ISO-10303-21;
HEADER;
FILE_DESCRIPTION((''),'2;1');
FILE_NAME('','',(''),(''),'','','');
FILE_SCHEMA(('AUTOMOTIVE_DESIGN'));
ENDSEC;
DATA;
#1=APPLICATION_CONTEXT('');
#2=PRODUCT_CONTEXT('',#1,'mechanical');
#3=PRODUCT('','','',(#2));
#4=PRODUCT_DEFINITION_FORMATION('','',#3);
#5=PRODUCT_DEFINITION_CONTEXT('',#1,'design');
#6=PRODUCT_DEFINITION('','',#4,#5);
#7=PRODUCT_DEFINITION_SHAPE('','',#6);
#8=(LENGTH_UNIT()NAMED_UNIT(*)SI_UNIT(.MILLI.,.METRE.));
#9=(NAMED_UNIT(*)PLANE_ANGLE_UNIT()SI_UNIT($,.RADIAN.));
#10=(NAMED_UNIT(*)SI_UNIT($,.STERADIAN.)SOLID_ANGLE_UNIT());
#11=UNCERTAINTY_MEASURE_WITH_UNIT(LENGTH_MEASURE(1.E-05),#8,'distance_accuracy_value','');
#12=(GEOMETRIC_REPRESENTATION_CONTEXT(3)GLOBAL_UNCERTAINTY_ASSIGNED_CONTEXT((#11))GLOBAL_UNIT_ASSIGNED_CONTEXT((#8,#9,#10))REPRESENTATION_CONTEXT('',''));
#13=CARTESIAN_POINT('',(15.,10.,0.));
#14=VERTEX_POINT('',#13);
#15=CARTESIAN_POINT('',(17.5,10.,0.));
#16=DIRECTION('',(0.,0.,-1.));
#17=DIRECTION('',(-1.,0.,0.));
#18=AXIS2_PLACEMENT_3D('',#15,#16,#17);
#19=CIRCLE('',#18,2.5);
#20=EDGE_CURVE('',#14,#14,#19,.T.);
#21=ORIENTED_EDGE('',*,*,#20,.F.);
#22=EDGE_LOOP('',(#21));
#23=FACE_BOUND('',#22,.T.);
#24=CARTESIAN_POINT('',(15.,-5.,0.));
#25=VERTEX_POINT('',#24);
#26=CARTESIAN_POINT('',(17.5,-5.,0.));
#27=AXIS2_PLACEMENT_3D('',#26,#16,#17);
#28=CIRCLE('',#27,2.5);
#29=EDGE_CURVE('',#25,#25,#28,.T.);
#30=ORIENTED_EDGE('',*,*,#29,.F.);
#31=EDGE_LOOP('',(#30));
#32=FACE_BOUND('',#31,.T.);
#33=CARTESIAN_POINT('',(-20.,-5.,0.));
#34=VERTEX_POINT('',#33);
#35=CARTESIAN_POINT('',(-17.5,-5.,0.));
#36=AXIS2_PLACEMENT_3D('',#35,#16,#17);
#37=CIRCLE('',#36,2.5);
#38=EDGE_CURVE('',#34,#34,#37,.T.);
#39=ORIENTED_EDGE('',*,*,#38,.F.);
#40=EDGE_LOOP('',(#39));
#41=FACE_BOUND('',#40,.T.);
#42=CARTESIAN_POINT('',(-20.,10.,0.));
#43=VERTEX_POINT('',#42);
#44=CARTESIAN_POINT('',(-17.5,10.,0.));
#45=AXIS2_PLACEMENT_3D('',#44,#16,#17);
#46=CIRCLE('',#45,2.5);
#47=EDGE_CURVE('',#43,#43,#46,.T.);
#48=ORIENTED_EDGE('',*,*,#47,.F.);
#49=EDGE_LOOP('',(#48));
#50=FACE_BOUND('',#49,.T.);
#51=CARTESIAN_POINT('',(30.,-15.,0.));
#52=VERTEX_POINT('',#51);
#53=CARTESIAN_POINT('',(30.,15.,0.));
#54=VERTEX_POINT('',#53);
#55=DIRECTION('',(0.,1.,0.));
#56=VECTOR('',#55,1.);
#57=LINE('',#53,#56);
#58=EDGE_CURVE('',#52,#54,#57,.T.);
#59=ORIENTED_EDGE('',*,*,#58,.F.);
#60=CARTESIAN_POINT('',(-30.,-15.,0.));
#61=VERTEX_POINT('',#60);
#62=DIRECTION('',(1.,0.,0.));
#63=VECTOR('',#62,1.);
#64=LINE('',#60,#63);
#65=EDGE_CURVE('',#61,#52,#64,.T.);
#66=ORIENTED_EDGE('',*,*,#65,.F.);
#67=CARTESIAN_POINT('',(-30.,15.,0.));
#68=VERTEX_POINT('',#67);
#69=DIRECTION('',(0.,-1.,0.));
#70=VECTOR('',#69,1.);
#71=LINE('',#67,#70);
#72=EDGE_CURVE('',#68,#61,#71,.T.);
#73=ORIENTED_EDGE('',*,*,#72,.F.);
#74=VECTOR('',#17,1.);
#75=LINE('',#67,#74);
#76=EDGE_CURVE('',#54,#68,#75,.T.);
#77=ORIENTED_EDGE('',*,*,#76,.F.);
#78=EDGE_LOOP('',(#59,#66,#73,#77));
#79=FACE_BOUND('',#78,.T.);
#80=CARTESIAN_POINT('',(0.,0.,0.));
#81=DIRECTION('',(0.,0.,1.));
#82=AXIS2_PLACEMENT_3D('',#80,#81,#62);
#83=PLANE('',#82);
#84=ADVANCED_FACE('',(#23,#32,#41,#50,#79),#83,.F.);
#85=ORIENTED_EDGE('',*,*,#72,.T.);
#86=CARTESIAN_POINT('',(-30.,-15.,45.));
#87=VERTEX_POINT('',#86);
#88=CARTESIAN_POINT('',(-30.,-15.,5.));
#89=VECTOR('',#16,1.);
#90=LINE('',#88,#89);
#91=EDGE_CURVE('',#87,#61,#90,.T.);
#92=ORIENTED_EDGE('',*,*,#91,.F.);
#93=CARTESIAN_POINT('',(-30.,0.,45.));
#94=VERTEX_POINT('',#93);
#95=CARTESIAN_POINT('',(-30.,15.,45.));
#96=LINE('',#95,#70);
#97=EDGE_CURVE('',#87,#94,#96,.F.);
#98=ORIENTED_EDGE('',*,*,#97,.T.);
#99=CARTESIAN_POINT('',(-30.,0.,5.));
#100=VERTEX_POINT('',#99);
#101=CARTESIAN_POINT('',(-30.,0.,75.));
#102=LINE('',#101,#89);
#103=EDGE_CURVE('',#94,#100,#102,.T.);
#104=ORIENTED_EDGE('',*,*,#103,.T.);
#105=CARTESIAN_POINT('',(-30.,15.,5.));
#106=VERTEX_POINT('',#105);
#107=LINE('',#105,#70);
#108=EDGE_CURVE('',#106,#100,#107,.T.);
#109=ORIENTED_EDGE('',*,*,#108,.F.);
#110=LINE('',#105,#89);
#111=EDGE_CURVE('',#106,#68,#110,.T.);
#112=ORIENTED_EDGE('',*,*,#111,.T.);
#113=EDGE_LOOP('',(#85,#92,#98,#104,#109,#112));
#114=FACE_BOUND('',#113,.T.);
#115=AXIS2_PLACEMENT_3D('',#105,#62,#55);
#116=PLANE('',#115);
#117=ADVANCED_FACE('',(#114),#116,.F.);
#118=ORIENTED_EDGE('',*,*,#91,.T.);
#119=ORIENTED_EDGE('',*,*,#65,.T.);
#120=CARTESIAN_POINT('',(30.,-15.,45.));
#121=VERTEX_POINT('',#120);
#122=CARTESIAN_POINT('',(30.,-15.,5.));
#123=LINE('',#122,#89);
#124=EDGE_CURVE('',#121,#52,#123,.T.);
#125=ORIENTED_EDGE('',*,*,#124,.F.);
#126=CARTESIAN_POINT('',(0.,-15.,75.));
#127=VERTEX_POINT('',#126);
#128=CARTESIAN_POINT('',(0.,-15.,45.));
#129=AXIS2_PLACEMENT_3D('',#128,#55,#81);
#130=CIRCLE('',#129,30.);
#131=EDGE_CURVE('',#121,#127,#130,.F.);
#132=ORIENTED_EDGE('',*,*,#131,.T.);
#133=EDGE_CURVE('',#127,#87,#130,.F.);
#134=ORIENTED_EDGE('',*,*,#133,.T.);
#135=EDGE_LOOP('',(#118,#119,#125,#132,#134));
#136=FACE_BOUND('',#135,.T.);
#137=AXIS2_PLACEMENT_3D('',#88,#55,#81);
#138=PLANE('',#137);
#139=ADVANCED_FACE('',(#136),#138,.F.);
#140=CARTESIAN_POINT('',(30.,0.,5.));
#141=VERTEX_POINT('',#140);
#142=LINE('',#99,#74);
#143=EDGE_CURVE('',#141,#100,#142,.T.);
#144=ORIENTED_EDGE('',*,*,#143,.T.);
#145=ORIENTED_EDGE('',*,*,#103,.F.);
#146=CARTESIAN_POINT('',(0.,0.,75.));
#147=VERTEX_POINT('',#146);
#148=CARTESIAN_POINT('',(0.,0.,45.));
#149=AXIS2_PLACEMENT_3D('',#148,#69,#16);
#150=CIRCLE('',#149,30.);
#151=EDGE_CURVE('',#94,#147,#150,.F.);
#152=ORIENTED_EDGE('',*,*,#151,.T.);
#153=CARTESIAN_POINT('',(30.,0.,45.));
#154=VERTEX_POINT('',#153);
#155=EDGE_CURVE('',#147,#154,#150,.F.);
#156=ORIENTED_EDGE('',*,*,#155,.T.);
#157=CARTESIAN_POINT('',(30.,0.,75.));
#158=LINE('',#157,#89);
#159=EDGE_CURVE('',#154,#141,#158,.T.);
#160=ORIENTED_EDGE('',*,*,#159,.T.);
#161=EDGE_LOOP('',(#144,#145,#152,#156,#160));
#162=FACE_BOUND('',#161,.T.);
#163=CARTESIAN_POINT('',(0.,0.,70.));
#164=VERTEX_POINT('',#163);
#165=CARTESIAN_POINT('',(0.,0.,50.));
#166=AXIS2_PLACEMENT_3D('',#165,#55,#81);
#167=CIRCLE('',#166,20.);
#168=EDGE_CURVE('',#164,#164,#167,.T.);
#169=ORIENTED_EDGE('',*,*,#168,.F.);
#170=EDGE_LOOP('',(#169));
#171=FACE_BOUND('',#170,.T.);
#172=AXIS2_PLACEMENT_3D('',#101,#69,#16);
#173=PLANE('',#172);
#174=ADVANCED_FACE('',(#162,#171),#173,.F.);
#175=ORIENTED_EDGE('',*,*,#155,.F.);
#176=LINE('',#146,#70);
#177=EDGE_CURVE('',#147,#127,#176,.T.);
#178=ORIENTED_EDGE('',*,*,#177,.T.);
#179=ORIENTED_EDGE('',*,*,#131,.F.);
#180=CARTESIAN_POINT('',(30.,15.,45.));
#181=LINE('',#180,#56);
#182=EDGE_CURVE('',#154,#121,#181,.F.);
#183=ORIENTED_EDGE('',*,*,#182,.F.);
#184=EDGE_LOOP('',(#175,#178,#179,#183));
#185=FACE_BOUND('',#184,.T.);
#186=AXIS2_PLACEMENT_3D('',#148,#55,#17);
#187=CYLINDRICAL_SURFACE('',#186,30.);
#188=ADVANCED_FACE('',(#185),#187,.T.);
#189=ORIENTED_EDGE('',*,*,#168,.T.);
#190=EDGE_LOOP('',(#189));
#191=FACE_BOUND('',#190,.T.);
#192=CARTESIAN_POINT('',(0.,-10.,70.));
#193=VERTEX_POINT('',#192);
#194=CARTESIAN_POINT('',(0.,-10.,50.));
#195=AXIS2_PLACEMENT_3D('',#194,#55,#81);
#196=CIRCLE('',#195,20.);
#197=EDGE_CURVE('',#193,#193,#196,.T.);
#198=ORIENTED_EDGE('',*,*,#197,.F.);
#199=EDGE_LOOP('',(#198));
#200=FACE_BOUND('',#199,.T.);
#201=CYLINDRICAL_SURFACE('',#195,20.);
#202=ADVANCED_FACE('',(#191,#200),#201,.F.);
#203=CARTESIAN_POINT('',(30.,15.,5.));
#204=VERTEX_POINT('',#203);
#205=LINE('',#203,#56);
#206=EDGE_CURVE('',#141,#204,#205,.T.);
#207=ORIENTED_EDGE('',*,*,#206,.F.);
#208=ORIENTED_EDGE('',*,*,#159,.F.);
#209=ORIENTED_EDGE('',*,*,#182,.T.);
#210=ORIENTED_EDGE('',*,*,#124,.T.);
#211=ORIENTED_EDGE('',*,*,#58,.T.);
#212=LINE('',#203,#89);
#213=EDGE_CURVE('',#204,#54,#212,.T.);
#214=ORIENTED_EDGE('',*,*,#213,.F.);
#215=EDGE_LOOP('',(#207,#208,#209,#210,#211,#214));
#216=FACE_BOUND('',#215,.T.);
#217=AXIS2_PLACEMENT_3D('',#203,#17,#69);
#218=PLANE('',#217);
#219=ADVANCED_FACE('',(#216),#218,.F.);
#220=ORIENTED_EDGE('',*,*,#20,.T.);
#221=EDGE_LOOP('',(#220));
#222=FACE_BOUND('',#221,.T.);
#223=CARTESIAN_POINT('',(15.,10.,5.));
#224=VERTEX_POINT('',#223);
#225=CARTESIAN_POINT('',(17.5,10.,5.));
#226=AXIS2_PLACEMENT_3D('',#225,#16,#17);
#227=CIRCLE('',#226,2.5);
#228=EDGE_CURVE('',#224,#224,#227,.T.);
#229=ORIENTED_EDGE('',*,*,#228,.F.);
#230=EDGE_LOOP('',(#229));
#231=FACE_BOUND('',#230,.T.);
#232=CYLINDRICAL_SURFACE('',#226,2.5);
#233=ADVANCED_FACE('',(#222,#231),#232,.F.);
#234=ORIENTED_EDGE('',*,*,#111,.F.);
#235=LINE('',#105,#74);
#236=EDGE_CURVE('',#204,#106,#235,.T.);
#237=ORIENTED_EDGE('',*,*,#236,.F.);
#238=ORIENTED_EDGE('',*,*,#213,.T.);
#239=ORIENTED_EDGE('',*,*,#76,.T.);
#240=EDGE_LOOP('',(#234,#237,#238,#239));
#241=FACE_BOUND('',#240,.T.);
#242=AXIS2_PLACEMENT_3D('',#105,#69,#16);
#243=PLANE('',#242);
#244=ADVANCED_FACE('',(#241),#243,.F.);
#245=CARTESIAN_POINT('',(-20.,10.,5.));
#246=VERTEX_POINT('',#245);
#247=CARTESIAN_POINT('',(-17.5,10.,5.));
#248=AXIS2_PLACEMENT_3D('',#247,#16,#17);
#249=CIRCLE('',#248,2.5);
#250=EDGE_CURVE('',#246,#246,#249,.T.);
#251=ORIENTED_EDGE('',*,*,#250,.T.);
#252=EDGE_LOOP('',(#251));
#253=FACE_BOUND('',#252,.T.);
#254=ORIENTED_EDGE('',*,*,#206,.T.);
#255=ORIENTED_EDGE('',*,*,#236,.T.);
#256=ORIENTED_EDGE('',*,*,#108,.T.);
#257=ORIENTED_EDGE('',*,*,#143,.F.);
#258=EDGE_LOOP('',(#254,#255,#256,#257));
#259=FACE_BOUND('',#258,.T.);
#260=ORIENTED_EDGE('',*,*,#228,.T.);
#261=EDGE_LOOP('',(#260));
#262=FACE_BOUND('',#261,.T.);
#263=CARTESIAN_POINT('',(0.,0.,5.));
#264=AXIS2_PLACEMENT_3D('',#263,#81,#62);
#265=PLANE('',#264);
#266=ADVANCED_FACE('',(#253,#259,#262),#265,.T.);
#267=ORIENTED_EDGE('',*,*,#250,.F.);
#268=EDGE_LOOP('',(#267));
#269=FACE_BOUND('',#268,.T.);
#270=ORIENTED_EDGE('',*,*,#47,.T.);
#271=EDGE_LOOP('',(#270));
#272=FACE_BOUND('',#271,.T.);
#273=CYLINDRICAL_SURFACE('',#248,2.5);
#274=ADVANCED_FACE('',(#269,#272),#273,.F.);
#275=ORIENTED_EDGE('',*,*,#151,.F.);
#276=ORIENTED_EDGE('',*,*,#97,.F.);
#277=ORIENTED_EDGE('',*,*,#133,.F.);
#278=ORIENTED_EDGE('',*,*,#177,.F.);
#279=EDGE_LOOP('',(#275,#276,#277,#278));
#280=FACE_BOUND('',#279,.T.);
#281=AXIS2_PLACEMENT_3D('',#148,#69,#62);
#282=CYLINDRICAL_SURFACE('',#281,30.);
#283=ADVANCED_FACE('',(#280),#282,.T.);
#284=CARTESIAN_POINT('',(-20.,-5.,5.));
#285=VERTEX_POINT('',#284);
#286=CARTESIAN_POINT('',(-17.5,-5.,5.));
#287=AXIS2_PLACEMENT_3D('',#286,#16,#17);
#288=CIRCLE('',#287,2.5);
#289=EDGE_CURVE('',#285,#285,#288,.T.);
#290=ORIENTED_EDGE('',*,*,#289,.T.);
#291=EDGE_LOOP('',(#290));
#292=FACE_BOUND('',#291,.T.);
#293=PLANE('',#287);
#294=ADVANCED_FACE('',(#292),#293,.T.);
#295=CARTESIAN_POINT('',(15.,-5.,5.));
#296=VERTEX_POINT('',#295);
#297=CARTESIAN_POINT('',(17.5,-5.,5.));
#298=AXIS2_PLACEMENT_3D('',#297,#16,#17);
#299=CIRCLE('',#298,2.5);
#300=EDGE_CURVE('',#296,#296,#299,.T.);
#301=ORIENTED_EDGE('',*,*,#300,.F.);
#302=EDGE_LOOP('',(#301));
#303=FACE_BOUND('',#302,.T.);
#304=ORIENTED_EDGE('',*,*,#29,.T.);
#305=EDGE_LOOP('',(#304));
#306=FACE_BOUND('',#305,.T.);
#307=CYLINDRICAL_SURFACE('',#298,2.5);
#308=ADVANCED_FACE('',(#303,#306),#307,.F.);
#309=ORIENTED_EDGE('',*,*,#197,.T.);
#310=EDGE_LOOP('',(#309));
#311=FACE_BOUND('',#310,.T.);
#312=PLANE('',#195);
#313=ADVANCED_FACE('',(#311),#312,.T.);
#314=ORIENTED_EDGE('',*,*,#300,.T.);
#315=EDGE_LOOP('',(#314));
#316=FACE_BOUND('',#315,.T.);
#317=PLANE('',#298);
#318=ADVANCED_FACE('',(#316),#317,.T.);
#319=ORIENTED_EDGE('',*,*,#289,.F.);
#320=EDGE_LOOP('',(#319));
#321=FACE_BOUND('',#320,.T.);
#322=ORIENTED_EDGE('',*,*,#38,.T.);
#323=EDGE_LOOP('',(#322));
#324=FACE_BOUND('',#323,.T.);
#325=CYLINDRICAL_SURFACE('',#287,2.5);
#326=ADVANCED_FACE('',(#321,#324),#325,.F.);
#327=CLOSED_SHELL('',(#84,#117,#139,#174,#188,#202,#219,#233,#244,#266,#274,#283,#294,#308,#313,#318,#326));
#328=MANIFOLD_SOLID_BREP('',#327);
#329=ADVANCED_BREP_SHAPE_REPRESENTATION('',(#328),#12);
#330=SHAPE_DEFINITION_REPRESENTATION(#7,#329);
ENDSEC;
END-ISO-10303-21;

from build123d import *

# Parameters (mm, degrees)
SKETCH1_W           = 60
SKETCH1_H           = 30
BOSS_EXTRUDE1_DEPTH = 5
SKETCH2_W           = 60
SKETCH2_H           = 15
BOSS_EXTRUDE2_DEPTH = 70
SKETCH3_R           = 20
CUT_EXTRUDE1_DEPTH  = 10
SKETCH4_R           = 2.5
CUT_EXTRUDE2_DEPTH  = 5
FILLET1_R           = 30


with BuildPart() as part:
    # Sketch1 → Boss-Extrude1 (new body)
    with BuildSketch(Plane.XY):
        Rectangle(SKETCH1_W, SKETCH1_H)
    extrude(amount=BOSS_EXTRUDE1_DEPTH)

    # Sketch2 → Boss-Extrude2 (add)
    with BuildSketch(Plane.XY.offset(5)):
        with Locations((0, -7.5)):
            Rectangle(SKETCH2_W, SKETCH2_H)
    extrude(amount=BOSS_EXTRUDE2_DEPTH)

    # Sketch3 → Cut-Extrude1 (cut)
    with BuildSketch(Plane(origin=(0, 0, 0), x_dir=(1, 0, 0), z_dir=(0, 1, 0))):
        with Locations(Location((0, -50, 0), (0, 0, 270))):
            Circle(SKETCH3_R)
    extrude(amount=-CUT_EXTRUDE1_DEPTH, mode=Mode.SUBTRACT)

    # Sketch4 → Cut-Extrude2 (cut)
    with BuildSketch(Plane(origin=(0, 0, 0), x_dir=(-1, 0, 0), z_dir=(0, 0, -1))):
        with Locations((-17.5, 10)):
            Circle(SKETCH4_R)
        with Locations((17.5, 10)):
            Circle(SKETCH4_R)
        with Locations((17.5, -5)):
            Circle(SKETCH4_R)
        with Locations((-17.5, -5)):
            Circle(SKETCH4_R)
    extrude(amount=-CUT_EXTRUDE2_DEPTH, mode=Mode.SUBTRACT)

    # Fillet1
    fillet1_edges = [part.edges().sort_by_distance(p)[0] for p in [
        (30, -7.5, 75),
        (-30, -7.5, 75),
    ]]
    fillet(fillet1_edges, radius=FILLET1_R - 0.0001)  # a hair under: the kernel refuses the full size


solid = part.part
